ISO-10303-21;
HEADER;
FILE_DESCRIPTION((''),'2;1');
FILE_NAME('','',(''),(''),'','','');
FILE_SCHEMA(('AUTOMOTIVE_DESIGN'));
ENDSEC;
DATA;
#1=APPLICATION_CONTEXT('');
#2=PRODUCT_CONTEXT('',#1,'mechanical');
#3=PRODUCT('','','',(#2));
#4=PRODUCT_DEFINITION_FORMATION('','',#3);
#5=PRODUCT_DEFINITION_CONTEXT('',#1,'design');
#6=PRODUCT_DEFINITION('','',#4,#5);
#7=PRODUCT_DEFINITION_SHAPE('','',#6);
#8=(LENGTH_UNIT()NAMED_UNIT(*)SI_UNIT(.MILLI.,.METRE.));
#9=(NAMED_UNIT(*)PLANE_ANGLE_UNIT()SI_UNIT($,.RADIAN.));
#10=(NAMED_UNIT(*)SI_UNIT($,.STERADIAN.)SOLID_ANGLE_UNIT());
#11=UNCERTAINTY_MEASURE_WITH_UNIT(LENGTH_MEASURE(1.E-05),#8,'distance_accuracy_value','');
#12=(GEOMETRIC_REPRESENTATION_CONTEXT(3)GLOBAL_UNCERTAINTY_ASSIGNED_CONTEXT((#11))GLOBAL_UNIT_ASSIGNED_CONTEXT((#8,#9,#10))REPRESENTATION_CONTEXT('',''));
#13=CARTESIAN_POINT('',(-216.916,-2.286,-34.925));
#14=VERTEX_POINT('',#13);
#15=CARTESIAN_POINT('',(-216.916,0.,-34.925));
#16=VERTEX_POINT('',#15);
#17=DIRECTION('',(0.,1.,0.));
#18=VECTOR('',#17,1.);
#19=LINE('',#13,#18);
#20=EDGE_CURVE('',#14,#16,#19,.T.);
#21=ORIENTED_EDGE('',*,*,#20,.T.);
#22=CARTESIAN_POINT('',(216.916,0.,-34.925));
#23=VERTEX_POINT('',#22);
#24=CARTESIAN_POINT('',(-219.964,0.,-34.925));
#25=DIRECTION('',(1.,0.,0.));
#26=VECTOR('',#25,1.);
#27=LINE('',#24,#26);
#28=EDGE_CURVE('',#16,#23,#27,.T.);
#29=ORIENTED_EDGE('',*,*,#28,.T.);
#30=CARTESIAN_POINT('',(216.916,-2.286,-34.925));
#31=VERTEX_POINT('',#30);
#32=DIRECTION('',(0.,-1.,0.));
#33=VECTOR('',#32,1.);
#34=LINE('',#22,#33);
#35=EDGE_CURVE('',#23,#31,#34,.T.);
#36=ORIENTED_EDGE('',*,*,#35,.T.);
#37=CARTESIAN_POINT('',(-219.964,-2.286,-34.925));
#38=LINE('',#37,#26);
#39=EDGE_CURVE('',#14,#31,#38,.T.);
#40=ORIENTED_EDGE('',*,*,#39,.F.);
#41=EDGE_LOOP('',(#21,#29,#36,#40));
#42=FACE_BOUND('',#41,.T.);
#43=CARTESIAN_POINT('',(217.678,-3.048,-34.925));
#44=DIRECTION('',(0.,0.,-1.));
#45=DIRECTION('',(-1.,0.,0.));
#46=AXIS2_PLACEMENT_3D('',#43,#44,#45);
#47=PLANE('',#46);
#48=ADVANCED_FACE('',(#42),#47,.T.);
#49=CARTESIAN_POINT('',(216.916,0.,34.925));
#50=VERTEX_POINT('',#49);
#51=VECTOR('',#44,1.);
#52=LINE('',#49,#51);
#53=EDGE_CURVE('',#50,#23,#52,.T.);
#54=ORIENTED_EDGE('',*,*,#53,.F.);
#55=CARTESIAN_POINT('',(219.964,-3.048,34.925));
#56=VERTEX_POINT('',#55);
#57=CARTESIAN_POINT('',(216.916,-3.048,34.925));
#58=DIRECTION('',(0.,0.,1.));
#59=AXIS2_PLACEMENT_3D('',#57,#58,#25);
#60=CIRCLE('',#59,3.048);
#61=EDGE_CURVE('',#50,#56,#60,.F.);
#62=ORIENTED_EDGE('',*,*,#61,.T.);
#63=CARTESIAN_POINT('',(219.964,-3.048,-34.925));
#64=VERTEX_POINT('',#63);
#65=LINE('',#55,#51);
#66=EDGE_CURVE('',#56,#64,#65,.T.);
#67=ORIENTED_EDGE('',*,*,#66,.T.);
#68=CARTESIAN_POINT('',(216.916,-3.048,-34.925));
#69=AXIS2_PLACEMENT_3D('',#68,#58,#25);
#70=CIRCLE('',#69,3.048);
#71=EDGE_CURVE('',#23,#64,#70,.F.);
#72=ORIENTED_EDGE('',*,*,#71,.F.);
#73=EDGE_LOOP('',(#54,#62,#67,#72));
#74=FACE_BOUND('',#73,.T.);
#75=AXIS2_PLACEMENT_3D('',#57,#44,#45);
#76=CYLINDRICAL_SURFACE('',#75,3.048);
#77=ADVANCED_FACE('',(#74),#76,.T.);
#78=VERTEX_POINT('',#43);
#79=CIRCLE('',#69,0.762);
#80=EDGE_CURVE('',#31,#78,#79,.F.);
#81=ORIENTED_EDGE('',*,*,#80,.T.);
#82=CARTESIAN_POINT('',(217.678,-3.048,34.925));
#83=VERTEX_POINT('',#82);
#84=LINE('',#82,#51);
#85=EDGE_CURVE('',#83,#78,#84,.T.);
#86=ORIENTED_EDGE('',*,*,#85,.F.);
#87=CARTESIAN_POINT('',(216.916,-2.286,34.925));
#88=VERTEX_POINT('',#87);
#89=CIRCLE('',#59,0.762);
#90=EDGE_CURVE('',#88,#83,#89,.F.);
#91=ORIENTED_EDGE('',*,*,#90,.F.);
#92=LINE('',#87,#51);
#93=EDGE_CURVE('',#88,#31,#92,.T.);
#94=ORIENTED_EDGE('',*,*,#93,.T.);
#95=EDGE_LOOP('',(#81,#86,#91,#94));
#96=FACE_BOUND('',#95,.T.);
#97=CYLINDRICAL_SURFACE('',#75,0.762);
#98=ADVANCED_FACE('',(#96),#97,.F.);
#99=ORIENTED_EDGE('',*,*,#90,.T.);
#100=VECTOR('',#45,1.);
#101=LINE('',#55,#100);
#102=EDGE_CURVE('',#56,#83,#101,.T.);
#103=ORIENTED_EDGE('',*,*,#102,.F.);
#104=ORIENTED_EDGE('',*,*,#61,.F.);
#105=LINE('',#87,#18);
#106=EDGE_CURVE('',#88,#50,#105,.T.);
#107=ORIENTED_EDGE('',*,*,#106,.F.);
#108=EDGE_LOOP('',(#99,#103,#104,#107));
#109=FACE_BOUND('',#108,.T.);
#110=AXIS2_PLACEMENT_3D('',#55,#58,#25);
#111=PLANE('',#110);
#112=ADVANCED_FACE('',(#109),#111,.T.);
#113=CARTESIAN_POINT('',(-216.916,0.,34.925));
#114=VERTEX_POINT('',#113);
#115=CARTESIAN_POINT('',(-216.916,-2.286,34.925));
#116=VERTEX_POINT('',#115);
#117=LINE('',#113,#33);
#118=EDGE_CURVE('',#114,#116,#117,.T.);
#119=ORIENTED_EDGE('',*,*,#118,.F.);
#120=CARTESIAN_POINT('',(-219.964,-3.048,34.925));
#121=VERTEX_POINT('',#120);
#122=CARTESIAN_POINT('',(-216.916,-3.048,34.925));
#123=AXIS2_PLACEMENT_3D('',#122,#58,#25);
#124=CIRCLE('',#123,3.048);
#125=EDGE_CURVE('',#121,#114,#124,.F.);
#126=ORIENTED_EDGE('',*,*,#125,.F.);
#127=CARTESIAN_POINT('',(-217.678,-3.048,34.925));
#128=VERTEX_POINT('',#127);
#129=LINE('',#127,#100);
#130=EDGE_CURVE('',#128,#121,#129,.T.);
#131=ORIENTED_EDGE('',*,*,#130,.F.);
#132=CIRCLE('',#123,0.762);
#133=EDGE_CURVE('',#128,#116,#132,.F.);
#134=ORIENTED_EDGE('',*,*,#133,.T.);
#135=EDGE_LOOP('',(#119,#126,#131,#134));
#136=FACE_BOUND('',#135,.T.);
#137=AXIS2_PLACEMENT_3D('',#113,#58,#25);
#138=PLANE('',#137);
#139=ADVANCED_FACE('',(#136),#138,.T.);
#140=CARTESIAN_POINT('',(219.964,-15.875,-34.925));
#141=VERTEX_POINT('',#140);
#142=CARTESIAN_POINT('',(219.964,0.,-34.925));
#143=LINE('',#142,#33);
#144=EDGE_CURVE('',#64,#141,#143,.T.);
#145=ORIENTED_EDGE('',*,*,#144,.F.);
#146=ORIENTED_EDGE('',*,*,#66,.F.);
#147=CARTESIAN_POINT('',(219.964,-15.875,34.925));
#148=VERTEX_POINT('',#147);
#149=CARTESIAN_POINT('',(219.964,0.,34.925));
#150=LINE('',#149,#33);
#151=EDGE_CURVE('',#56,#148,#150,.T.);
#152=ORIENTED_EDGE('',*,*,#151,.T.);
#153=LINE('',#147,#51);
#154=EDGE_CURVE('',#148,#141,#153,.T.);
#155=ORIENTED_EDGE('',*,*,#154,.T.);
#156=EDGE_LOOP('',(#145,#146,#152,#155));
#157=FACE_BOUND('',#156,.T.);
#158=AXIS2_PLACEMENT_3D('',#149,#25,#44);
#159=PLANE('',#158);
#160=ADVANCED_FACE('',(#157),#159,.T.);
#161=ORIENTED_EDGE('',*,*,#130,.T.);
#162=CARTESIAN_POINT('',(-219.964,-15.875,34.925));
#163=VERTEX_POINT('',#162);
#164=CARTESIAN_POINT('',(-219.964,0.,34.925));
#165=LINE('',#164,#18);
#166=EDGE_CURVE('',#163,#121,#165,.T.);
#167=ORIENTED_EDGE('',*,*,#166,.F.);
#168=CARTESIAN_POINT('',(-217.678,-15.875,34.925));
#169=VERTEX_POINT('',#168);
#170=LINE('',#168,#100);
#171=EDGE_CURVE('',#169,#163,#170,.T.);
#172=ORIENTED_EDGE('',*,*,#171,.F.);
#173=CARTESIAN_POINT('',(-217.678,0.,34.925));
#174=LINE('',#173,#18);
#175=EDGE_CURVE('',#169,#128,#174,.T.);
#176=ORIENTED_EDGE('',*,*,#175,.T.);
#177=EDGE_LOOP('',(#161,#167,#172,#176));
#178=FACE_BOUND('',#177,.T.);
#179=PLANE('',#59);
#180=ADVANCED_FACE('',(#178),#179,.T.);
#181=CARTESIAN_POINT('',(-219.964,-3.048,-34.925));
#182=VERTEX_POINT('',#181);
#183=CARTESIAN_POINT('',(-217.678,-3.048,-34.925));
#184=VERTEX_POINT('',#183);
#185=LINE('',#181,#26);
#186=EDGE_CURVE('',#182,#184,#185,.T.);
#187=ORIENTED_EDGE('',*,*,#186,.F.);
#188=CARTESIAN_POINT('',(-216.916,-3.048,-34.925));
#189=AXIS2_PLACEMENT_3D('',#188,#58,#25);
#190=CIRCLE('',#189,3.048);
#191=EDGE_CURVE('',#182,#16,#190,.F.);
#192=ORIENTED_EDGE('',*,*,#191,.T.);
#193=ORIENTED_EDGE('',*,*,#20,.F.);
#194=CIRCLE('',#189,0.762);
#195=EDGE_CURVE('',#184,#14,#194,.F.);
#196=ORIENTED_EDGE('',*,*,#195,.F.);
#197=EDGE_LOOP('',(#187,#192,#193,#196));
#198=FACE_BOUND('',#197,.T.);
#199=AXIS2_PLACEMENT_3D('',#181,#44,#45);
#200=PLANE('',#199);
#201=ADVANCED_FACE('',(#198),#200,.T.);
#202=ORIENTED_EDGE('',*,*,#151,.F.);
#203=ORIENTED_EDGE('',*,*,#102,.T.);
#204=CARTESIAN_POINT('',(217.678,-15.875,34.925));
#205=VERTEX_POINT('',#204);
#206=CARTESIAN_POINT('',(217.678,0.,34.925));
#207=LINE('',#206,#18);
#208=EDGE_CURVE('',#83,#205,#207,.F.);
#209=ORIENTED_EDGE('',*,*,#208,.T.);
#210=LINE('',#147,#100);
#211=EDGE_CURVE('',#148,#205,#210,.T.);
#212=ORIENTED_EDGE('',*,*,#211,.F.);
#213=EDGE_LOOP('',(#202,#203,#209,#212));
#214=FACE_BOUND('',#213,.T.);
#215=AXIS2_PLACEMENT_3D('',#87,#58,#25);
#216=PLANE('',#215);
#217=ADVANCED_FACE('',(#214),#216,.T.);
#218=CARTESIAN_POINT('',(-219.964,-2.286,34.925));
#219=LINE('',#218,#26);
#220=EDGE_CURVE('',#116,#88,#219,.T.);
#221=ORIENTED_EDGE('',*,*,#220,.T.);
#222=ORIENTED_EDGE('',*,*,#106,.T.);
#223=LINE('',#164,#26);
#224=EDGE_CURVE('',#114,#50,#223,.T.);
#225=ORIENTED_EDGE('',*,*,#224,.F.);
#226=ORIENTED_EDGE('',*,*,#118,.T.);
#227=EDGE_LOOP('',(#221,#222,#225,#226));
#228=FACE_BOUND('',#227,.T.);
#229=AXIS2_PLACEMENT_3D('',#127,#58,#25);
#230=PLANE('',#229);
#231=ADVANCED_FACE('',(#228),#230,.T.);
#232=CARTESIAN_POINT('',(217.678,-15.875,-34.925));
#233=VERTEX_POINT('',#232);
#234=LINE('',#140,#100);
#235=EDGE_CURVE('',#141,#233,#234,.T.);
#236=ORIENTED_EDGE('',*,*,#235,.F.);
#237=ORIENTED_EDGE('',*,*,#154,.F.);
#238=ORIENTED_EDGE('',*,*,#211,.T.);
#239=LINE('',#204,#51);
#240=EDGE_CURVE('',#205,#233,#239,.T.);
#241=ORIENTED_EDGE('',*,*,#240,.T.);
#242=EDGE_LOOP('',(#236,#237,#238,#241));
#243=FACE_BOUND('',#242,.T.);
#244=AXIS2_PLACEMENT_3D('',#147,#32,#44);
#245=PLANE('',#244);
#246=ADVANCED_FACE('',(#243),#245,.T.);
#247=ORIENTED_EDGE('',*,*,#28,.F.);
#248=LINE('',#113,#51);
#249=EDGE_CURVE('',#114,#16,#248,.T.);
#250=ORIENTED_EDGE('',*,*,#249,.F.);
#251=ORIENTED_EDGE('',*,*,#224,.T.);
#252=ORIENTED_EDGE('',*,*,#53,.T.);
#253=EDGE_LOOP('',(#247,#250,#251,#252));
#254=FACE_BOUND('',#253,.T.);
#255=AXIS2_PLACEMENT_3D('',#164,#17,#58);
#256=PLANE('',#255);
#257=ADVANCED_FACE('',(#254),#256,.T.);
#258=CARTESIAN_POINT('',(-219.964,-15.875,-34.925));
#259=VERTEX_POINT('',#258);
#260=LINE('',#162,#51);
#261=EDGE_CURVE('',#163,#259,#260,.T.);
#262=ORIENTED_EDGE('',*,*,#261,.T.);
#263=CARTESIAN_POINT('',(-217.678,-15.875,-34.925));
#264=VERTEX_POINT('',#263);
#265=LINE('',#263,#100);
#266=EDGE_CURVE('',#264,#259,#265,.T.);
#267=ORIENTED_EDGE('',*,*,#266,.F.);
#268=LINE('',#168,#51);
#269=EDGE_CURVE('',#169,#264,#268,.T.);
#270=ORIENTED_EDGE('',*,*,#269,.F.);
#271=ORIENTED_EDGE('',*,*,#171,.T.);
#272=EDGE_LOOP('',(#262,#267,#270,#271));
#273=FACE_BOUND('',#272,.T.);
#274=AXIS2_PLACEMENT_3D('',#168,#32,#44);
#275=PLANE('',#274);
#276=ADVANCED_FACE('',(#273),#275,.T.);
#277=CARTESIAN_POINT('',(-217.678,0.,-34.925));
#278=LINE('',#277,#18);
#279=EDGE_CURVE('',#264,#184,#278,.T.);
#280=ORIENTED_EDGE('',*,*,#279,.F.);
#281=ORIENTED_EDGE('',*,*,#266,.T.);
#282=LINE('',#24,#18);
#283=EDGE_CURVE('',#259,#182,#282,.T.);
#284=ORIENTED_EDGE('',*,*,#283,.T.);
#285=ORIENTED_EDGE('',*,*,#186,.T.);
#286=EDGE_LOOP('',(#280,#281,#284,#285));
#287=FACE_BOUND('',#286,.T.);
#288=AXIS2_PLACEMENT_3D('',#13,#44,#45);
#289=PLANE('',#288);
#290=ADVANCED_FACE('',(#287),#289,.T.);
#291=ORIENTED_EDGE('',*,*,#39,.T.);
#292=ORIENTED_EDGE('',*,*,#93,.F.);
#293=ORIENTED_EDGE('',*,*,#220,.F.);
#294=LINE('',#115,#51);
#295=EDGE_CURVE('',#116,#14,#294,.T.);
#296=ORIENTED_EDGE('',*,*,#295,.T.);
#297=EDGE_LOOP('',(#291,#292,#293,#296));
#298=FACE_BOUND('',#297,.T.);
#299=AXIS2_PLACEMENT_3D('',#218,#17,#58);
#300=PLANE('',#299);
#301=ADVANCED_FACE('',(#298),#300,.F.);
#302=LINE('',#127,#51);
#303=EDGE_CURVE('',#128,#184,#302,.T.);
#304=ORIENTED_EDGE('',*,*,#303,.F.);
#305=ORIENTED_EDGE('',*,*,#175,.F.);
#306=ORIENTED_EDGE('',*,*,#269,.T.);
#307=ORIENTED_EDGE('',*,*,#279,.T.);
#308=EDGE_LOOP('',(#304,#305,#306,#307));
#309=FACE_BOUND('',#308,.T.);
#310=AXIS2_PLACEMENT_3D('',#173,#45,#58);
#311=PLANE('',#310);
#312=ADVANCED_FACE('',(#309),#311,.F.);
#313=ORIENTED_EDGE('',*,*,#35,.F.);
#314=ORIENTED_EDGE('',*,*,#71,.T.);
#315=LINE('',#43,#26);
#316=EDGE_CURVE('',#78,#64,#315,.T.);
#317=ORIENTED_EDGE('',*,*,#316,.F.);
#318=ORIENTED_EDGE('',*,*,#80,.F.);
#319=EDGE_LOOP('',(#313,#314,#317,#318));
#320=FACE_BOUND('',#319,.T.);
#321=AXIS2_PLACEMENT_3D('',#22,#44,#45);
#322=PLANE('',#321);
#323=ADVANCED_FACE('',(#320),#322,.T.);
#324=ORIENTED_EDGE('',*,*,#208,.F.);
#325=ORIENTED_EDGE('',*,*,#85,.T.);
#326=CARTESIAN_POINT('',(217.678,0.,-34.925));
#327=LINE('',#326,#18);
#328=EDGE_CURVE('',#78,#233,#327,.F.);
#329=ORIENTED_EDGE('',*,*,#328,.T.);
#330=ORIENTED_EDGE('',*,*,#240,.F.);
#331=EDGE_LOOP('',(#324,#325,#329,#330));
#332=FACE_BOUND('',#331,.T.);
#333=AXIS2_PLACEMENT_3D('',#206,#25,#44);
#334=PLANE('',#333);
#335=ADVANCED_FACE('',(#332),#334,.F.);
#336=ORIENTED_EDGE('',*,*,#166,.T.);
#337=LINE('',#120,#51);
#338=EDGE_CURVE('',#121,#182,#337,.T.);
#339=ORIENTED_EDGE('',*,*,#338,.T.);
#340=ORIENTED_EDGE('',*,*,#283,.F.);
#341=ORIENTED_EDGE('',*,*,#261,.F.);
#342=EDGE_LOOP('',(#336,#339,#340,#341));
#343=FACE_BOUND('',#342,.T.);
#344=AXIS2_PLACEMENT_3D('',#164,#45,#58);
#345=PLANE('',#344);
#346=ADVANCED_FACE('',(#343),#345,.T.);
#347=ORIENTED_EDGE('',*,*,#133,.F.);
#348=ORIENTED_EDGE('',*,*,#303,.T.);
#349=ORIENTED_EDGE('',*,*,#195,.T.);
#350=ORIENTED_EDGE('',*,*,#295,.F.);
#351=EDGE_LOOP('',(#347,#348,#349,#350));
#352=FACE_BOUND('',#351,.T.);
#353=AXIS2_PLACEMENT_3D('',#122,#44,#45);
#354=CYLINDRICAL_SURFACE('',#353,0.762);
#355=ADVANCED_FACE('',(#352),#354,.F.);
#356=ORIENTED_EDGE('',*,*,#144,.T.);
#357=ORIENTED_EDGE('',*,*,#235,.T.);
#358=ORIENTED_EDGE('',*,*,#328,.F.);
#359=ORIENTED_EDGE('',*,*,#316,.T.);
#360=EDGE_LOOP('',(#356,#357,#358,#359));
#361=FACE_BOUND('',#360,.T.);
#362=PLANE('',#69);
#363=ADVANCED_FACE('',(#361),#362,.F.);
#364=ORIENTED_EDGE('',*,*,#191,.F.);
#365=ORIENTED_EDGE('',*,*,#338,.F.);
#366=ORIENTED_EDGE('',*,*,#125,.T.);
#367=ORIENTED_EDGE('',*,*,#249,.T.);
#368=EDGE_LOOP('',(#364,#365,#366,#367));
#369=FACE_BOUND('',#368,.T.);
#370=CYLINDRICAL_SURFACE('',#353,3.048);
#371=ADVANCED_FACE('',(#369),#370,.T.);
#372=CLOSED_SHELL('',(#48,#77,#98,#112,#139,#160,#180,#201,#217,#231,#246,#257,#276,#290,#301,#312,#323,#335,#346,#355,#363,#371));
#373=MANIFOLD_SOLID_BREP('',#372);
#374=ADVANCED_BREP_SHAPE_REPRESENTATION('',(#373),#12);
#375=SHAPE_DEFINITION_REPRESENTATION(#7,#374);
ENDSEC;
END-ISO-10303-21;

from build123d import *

# Parameters (mm, degrees)
BASE_FLANGE1_DEPTH = 34.925


# Sheet-metal steps are written as plain solids
with BuildPart() as part:
    # Sketch2 → Base-Flange1 (new, symmetric)
    with BuildSketch(Plane.XY):
        with BuildLine():
            Line((-219.964, -15.875), (-219.964, -3.048))
            ThreePointArc((-219.964, -3.048), (-219.071261469, -0.892738531), (-216.916, 0))
            Line((-216.916, 0), (216.916, 0))
            ThreePointArc((216.916, 0), (219.071261469, -0.892738531), (219.964, -3.048))
            Line((219.964, -3.048), (219.964, -15.875))
            Line((219.964, -15.875), (217.678, -15.875))
            Line((217.678, -15.875), (217.678, -3.048))
            ThreePointArc((217.678, -3.048), (217.454815367, -2.509184633), (216.916, -2.286))
            Line((216.916, -2.286), (-216.916, -2.286))
            ThreePointArc((-216.916, -2.286), (-217.454815367, -2.509184633), (-217.678, -3.048))
            Line((-217.678, -3.048), (-217.678, -15.875))
            Line((-217.678, -15.875), (-219.964, -15.875))
        make_face()
    extrude(amount=BASE_FLANGE1_DEPTH, both=True)


solid = part.part
